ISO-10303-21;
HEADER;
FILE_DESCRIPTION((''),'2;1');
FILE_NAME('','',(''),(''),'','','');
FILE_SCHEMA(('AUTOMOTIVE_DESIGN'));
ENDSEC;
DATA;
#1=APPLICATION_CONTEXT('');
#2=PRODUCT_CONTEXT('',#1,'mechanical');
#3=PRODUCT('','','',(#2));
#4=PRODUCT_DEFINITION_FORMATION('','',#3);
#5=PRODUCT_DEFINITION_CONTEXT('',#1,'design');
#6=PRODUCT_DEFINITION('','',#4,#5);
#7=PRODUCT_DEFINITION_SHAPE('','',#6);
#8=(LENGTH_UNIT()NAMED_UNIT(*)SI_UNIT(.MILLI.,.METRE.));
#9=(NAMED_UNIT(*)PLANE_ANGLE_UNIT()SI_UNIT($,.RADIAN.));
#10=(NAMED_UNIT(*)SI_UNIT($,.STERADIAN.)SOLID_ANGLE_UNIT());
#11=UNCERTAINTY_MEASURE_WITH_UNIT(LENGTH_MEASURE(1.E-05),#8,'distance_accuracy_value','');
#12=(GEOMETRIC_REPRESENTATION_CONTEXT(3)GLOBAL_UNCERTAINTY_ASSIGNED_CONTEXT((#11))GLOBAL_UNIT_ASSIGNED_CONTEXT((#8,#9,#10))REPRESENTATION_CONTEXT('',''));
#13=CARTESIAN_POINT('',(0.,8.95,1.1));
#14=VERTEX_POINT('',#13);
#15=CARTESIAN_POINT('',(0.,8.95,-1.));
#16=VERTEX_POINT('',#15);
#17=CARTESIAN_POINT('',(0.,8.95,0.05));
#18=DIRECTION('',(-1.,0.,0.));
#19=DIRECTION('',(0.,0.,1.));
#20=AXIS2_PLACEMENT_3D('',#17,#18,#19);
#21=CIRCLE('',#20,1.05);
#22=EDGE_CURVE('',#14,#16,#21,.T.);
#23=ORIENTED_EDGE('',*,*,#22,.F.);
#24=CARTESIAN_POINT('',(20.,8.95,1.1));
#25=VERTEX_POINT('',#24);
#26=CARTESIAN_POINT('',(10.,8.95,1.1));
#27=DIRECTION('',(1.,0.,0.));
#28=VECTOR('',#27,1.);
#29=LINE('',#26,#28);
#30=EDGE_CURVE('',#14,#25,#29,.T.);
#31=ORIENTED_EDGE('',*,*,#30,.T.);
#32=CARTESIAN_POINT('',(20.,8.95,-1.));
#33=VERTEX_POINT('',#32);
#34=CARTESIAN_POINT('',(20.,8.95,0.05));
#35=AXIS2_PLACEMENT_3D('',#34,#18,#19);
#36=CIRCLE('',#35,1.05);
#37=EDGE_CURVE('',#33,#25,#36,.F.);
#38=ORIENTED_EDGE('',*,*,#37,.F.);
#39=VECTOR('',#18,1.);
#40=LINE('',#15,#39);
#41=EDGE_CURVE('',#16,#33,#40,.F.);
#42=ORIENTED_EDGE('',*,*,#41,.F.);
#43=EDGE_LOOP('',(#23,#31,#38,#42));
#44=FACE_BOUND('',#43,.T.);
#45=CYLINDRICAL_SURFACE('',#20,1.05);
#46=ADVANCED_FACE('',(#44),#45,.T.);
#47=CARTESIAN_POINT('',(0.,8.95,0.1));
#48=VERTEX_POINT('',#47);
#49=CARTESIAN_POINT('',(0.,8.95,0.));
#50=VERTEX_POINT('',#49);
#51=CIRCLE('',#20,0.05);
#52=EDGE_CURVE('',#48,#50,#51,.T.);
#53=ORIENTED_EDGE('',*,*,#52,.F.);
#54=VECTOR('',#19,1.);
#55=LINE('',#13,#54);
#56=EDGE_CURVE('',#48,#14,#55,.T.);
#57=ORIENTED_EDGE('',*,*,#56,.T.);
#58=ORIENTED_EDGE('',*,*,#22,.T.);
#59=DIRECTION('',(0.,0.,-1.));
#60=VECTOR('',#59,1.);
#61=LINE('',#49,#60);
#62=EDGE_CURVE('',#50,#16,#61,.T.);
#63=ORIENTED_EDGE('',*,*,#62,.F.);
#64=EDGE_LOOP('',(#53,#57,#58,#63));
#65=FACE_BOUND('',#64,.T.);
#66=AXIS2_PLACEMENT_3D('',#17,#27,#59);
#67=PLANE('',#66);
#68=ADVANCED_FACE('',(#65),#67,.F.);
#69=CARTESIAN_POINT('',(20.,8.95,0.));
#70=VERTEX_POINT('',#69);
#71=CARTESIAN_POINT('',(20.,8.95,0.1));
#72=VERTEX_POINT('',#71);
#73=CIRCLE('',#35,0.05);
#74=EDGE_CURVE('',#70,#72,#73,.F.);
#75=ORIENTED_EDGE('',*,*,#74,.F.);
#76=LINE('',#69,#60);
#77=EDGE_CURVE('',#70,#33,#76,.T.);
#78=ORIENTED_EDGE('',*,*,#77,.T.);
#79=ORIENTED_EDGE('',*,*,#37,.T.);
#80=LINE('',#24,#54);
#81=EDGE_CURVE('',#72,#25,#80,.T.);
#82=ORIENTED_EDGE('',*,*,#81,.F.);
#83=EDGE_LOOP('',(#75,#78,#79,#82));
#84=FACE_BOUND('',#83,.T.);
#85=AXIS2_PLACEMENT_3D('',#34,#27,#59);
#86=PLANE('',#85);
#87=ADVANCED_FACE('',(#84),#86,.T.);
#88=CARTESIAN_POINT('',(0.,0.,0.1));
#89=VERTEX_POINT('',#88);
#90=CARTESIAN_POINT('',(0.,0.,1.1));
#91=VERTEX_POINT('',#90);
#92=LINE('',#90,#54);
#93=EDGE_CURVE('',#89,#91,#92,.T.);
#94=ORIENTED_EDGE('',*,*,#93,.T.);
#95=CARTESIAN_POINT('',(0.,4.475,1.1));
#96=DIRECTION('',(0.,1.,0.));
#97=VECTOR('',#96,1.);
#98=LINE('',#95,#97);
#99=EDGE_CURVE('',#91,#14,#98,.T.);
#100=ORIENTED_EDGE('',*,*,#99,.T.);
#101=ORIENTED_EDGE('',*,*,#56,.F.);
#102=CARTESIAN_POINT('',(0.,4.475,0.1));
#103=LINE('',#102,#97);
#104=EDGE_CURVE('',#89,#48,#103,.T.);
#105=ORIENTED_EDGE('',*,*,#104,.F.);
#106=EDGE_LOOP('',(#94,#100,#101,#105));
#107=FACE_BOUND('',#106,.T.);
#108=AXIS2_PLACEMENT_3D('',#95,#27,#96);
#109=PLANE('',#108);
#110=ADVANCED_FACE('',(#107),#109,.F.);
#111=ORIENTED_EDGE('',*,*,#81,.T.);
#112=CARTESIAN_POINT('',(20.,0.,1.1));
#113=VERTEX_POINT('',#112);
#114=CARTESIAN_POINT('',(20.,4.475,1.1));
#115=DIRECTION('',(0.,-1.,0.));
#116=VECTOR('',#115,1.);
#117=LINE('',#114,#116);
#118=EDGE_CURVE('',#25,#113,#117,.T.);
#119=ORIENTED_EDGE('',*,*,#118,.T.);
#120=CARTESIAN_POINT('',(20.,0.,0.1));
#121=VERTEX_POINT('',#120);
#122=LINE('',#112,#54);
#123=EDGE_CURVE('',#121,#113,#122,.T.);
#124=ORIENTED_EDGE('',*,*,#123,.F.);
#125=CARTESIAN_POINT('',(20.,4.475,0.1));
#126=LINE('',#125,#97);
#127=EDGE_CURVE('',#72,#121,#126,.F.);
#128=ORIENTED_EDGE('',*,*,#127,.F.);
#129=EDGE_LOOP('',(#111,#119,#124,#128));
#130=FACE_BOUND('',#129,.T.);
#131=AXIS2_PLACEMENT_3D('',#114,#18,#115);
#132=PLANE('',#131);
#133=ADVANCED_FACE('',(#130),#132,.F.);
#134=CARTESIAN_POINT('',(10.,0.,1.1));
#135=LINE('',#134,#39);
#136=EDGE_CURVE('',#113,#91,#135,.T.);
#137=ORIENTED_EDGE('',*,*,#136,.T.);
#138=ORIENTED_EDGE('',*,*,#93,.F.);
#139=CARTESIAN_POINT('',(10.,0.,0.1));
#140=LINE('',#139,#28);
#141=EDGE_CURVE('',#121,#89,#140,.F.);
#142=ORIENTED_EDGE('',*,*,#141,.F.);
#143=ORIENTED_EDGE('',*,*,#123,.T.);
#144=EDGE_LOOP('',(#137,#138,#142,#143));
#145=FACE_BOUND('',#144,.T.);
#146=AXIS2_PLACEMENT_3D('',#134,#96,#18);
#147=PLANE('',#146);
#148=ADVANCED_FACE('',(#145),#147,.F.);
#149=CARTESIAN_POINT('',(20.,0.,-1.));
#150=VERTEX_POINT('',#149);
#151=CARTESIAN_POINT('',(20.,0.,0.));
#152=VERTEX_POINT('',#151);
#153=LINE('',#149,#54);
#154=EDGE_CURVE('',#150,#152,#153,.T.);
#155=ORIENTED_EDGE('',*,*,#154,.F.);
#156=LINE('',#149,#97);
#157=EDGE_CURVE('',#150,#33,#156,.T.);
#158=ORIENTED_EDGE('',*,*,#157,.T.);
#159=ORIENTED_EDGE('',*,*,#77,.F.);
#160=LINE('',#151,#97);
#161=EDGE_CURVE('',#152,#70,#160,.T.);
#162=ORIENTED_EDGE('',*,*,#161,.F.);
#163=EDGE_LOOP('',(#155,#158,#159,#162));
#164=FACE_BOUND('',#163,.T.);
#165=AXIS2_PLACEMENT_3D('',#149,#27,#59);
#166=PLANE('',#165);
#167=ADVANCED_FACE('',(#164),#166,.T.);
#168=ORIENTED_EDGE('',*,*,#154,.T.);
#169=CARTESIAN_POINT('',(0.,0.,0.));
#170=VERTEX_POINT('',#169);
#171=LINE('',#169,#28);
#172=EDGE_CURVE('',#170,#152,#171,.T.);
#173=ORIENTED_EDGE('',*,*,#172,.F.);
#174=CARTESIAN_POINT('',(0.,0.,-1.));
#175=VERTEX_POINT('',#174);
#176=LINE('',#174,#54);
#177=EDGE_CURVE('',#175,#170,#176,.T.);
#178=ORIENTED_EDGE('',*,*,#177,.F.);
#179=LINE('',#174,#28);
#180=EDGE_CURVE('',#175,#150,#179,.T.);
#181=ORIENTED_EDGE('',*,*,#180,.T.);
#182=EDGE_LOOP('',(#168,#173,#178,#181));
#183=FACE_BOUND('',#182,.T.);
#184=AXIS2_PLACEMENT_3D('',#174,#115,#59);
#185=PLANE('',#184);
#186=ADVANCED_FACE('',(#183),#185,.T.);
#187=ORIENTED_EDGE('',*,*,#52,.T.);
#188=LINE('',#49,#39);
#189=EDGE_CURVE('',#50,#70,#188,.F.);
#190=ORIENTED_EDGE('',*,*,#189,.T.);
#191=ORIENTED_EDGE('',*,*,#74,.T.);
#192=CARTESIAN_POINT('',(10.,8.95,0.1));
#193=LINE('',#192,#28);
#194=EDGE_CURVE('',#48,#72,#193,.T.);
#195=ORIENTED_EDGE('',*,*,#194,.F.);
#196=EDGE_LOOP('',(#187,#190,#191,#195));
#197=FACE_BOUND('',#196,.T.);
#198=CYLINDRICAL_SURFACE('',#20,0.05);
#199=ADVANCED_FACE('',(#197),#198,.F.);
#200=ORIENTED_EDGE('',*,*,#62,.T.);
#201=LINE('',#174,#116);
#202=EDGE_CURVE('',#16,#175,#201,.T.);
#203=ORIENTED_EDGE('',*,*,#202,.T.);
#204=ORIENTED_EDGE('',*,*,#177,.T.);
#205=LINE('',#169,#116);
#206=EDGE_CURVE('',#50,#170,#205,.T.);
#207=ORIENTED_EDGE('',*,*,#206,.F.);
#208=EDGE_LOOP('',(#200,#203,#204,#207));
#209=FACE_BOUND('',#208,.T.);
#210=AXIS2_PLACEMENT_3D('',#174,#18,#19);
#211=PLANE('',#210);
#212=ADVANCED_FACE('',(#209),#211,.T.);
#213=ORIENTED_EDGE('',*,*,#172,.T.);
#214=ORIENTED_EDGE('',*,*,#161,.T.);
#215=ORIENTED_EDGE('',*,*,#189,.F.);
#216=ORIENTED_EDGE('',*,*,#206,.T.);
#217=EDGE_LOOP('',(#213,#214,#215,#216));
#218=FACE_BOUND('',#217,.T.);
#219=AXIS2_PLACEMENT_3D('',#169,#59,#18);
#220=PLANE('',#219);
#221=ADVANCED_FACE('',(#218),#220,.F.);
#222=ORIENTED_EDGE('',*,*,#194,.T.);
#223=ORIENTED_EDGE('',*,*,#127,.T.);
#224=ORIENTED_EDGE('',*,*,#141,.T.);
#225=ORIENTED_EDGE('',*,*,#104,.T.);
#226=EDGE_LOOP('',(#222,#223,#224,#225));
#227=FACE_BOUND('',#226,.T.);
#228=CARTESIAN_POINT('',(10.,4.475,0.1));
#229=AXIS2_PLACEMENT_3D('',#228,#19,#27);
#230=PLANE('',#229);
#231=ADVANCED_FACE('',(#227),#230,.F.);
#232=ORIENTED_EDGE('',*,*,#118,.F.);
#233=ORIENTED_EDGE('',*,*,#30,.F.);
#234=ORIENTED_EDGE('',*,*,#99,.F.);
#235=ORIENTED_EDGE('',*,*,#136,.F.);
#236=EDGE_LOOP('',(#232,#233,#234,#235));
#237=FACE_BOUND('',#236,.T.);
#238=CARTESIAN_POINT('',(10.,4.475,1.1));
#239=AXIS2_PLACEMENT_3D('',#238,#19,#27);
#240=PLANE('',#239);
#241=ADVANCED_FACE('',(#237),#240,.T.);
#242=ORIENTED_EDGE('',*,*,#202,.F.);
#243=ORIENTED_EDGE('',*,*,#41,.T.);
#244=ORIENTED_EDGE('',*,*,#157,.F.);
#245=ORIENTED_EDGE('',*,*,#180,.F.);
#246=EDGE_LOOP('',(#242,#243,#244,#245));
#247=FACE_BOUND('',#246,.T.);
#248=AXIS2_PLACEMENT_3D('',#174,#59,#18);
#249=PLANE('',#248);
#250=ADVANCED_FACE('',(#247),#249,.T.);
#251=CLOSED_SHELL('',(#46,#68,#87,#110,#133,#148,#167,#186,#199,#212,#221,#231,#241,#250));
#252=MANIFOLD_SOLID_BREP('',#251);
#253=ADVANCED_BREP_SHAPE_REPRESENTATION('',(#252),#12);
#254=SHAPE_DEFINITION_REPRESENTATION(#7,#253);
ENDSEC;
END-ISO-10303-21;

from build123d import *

# Parameters (mm, degrees)
SKETCH_1_W         = 20
SKETCH_1_H         = 10
BASEPLATE_DEPTH    = 1
HEM_CLOSED_DEPTH   = 20
HEM_CLOSED_2_DEPTH = 20


# Read off the part's stored shape, not the designer's step: Hem_closed
# Sheet-metal steps are written as plain solids
with BuildPart() as part:
    # Sketch 1 → BasePlate (new body)
    with BuildSketch(Plane.XY):
        with Locations((10, 5)):
            Rectangle(SKETCH_1_W, SKETCH_1_H)
    extrude(amount=-BASEPLATE_DEPTH)

    # Hem_closed outline → Hem_closed (cut)
    with BuildSketch(Plane.YZ):
        with BuildLine():
            Line((10, 0), (9.998808848, 0))
            ThreePointArc((9.998808848, 0), (9.674568837, -0.709934208), (8.95, -1))
            Line((8.95, -1), (10, -1))
            Line((10, -1), (10, 0))
        make_face()
    extrude(amount=HEM_CLOSED_DEPTH, mode=Mode.SUBTRACT)

    # Hem_closed 2 outline → Hem_closed 2 (add)
    with BuildSketch(Plane.YZ):
        with BuildLine():
            Line((0, 1.1), (0, 0.1))
            Line((0, 0.1), (8.95, 0.1))
            ThreePointArc((8.95, 0.1), (9, 0.05), (8.95, 0))
            Line((8.95, 0), (9.998808848, 0))
            ThreePointArc((9.998808848, 0), (9.709934208, 0.774568837), (8.95, 1.1))
            Line((8.95, 1.1), (0, 1.1))
        make_face()
    extrude(amount=HEM_CLOSED_2_DEPTH)


solid = part.part
